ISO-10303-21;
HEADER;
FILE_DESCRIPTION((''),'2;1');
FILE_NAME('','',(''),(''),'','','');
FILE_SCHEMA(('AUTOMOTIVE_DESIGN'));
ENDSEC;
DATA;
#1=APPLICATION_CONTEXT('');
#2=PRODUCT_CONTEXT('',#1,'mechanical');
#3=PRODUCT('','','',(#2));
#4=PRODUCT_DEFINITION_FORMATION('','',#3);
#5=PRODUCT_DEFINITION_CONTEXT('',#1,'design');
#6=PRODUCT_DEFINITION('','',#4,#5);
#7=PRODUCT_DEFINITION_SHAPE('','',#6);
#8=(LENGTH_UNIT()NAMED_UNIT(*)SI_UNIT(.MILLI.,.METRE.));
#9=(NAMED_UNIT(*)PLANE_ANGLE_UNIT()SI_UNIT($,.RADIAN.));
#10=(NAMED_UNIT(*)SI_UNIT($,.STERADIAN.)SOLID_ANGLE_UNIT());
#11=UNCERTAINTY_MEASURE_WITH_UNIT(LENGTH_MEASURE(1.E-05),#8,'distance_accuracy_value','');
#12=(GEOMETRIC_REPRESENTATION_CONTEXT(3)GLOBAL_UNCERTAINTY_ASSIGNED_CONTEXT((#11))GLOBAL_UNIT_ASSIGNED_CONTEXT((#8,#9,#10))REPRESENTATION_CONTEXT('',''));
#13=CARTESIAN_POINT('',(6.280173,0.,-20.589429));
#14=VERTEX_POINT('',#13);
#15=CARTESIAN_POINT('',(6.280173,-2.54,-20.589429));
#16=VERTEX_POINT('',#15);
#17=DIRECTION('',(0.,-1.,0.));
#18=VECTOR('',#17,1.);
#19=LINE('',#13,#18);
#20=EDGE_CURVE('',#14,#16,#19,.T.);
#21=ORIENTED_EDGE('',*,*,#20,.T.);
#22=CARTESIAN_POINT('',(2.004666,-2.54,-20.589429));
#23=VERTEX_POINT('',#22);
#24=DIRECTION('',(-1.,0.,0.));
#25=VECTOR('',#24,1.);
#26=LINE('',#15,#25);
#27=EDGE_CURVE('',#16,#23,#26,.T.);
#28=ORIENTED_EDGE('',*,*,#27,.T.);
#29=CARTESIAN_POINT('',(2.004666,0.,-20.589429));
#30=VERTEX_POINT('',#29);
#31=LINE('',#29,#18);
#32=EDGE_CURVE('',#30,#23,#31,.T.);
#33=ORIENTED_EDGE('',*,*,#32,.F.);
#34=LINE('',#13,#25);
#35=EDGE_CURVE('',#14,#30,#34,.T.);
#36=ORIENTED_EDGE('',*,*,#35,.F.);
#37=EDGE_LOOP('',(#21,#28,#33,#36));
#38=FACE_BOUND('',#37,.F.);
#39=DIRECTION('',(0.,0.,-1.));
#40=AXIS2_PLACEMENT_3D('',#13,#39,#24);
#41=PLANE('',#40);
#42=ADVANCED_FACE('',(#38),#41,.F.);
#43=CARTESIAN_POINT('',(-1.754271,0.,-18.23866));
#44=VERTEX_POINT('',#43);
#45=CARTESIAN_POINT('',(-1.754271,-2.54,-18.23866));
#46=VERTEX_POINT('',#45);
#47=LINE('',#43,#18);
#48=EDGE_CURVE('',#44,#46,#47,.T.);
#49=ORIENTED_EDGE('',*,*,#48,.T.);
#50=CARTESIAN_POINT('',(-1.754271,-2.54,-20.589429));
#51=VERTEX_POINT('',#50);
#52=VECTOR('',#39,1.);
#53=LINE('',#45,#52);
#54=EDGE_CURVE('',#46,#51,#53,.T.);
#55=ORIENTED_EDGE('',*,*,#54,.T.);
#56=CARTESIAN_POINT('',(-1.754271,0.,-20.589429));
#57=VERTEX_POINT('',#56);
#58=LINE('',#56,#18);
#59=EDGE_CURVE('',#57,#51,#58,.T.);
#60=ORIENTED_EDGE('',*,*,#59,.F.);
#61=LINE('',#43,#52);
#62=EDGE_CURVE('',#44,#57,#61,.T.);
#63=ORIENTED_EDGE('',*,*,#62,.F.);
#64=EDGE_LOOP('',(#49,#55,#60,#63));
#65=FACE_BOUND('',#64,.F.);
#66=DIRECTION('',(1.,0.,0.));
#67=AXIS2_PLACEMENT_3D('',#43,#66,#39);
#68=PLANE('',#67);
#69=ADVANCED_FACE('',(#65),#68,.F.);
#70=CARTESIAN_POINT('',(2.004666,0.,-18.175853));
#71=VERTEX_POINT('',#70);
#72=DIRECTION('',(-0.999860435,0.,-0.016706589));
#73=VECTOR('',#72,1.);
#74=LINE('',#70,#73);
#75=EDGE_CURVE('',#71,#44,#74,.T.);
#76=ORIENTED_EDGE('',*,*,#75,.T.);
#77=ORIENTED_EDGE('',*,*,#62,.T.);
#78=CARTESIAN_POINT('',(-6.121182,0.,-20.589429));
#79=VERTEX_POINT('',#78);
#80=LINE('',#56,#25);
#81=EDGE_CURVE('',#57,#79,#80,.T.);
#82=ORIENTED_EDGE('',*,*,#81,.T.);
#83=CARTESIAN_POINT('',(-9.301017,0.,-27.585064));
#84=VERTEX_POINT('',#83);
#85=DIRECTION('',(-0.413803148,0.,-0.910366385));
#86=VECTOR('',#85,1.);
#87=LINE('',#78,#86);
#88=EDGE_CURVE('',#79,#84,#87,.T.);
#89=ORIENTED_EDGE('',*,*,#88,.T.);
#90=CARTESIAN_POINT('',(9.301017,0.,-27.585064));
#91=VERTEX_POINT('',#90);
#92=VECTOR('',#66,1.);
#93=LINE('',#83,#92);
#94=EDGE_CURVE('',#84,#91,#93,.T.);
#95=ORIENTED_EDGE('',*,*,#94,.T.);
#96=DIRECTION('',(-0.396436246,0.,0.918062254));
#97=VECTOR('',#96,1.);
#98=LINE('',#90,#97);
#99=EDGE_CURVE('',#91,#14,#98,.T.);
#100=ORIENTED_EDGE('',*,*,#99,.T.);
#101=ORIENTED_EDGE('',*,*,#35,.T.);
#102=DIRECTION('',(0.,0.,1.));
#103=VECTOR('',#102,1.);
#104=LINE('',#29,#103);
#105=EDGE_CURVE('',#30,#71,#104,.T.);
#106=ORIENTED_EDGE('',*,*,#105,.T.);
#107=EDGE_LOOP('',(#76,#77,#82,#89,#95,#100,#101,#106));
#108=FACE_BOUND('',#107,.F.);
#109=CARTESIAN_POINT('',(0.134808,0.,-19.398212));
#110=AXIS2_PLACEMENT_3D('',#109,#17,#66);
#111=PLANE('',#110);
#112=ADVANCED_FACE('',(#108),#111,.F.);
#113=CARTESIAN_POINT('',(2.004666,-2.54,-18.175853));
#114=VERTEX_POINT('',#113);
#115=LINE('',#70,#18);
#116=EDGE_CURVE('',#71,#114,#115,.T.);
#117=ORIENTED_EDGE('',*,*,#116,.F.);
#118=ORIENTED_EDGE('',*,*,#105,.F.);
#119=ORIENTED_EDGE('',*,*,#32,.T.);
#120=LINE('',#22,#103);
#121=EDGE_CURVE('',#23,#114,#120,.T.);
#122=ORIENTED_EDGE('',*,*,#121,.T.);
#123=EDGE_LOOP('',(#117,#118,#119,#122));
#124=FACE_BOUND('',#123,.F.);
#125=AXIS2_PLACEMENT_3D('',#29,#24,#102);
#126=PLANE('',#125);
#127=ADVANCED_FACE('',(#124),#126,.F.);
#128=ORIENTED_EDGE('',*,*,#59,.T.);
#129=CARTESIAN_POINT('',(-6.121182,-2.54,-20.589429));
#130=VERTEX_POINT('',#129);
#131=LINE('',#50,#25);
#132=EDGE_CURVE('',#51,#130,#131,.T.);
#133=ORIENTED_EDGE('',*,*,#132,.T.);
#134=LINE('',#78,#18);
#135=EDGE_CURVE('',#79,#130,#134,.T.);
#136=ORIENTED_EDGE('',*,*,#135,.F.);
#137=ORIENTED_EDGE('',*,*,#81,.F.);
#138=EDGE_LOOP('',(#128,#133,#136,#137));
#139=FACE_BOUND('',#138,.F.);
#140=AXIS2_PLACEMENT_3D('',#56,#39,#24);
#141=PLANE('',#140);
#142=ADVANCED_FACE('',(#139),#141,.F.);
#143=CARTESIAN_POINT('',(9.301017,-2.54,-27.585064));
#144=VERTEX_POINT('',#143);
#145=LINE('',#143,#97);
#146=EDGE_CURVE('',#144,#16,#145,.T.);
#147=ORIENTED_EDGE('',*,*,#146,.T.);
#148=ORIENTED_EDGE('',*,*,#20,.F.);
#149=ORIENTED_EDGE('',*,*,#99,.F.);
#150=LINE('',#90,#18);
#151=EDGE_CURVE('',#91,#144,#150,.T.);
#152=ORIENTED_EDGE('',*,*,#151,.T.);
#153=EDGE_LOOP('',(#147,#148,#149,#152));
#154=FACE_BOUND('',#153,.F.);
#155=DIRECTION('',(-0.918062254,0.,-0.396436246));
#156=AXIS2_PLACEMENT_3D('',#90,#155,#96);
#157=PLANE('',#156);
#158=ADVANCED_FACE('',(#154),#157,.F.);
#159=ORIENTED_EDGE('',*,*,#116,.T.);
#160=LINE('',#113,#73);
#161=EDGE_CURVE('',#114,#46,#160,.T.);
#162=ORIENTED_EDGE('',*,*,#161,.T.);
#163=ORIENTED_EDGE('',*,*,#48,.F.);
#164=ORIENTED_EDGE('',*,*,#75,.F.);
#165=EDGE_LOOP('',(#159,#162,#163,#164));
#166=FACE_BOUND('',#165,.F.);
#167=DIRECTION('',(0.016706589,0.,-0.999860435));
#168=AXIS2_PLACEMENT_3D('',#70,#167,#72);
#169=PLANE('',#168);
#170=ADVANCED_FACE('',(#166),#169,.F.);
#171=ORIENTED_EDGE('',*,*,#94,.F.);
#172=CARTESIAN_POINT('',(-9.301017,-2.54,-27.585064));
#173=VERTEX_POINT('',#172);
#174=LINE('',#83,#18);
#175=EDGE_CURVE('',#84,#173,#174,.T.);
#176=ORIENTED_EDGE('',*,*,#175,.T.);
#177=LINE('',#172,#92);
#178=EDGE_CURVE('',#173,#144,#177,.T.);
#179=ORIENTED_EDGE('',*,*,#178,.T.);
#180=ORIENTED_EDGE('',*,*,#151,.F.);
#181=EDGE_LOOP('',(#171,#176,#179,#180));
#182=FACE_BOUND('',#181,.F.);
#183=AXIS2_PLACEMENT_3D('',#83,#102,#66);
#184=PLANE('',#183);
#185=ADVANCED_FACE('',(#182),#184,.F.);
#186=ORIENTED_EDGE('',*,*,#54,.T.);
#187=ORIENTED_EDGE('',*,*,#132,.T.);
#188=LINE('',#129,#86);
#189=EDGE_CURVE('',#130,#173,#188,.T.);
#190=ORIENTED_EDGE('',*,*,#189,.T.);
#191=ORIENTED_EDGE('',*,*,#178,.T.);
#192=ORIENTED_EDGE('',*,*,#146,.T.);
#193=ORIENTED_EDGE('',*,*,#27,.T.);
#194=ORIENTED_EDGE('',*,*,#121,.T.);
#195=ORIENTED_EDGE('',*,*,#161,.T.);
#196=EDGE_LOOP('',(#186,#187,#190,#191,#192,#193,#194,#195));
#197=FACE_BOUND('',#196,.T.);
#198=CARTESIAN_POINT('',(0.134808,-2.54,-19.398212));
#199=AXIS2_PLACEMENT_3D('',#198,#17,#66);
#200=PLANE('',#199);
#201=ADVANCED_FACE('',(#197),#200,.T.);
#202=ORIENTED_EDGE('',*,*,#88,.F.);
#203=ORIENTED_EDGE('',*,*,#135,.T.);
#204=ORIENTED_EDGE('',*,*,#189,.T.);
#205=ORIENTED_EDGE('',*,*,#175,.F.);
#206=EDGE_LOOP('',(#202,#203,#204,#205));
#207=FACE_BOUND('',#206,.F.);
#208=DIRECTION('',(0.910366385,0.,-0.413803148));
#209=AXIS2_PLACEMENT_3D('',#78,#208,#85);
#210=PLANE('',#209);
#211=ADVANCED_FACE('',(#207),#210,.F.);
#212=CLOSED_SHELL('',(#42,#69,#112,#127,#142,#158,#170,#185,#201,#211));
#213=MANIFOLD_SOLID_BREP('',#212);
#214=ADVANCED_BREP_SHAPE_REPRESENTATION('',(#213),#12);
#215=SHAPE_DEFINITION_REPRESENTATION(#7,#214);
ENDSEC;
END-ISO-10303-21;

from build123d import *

# Parameters (mm, degrees)
F1_DEPTH = 2.54


# Not quite as in the source:
# - a feature names something its author has since deleted; it is built from what else it names


with BuildPart() as f1:
    # F0 (on Front) → F1 (new body)
    with BuildSketch(Plane.XZ):
        Polygon((-1.7542706408, -20.5894294426), (2.0046659093, -20.5894294426), (2.0046659093, -18.1758526358), (-1.7542706408, -18.2386604086), align=None)
        Polygon((-9.3010173015, -27.5850638216), (9.3010173015, -27.5850638216), (6.2801731089, -20.5894294426), (2.0046659093, -20.5894294426), (-1.7542706408, -20.5894294426), (-6.1211816028, -20.5894294426), align=None)
    extrude(amount=F1_DEPTH)


solid = f1.part
